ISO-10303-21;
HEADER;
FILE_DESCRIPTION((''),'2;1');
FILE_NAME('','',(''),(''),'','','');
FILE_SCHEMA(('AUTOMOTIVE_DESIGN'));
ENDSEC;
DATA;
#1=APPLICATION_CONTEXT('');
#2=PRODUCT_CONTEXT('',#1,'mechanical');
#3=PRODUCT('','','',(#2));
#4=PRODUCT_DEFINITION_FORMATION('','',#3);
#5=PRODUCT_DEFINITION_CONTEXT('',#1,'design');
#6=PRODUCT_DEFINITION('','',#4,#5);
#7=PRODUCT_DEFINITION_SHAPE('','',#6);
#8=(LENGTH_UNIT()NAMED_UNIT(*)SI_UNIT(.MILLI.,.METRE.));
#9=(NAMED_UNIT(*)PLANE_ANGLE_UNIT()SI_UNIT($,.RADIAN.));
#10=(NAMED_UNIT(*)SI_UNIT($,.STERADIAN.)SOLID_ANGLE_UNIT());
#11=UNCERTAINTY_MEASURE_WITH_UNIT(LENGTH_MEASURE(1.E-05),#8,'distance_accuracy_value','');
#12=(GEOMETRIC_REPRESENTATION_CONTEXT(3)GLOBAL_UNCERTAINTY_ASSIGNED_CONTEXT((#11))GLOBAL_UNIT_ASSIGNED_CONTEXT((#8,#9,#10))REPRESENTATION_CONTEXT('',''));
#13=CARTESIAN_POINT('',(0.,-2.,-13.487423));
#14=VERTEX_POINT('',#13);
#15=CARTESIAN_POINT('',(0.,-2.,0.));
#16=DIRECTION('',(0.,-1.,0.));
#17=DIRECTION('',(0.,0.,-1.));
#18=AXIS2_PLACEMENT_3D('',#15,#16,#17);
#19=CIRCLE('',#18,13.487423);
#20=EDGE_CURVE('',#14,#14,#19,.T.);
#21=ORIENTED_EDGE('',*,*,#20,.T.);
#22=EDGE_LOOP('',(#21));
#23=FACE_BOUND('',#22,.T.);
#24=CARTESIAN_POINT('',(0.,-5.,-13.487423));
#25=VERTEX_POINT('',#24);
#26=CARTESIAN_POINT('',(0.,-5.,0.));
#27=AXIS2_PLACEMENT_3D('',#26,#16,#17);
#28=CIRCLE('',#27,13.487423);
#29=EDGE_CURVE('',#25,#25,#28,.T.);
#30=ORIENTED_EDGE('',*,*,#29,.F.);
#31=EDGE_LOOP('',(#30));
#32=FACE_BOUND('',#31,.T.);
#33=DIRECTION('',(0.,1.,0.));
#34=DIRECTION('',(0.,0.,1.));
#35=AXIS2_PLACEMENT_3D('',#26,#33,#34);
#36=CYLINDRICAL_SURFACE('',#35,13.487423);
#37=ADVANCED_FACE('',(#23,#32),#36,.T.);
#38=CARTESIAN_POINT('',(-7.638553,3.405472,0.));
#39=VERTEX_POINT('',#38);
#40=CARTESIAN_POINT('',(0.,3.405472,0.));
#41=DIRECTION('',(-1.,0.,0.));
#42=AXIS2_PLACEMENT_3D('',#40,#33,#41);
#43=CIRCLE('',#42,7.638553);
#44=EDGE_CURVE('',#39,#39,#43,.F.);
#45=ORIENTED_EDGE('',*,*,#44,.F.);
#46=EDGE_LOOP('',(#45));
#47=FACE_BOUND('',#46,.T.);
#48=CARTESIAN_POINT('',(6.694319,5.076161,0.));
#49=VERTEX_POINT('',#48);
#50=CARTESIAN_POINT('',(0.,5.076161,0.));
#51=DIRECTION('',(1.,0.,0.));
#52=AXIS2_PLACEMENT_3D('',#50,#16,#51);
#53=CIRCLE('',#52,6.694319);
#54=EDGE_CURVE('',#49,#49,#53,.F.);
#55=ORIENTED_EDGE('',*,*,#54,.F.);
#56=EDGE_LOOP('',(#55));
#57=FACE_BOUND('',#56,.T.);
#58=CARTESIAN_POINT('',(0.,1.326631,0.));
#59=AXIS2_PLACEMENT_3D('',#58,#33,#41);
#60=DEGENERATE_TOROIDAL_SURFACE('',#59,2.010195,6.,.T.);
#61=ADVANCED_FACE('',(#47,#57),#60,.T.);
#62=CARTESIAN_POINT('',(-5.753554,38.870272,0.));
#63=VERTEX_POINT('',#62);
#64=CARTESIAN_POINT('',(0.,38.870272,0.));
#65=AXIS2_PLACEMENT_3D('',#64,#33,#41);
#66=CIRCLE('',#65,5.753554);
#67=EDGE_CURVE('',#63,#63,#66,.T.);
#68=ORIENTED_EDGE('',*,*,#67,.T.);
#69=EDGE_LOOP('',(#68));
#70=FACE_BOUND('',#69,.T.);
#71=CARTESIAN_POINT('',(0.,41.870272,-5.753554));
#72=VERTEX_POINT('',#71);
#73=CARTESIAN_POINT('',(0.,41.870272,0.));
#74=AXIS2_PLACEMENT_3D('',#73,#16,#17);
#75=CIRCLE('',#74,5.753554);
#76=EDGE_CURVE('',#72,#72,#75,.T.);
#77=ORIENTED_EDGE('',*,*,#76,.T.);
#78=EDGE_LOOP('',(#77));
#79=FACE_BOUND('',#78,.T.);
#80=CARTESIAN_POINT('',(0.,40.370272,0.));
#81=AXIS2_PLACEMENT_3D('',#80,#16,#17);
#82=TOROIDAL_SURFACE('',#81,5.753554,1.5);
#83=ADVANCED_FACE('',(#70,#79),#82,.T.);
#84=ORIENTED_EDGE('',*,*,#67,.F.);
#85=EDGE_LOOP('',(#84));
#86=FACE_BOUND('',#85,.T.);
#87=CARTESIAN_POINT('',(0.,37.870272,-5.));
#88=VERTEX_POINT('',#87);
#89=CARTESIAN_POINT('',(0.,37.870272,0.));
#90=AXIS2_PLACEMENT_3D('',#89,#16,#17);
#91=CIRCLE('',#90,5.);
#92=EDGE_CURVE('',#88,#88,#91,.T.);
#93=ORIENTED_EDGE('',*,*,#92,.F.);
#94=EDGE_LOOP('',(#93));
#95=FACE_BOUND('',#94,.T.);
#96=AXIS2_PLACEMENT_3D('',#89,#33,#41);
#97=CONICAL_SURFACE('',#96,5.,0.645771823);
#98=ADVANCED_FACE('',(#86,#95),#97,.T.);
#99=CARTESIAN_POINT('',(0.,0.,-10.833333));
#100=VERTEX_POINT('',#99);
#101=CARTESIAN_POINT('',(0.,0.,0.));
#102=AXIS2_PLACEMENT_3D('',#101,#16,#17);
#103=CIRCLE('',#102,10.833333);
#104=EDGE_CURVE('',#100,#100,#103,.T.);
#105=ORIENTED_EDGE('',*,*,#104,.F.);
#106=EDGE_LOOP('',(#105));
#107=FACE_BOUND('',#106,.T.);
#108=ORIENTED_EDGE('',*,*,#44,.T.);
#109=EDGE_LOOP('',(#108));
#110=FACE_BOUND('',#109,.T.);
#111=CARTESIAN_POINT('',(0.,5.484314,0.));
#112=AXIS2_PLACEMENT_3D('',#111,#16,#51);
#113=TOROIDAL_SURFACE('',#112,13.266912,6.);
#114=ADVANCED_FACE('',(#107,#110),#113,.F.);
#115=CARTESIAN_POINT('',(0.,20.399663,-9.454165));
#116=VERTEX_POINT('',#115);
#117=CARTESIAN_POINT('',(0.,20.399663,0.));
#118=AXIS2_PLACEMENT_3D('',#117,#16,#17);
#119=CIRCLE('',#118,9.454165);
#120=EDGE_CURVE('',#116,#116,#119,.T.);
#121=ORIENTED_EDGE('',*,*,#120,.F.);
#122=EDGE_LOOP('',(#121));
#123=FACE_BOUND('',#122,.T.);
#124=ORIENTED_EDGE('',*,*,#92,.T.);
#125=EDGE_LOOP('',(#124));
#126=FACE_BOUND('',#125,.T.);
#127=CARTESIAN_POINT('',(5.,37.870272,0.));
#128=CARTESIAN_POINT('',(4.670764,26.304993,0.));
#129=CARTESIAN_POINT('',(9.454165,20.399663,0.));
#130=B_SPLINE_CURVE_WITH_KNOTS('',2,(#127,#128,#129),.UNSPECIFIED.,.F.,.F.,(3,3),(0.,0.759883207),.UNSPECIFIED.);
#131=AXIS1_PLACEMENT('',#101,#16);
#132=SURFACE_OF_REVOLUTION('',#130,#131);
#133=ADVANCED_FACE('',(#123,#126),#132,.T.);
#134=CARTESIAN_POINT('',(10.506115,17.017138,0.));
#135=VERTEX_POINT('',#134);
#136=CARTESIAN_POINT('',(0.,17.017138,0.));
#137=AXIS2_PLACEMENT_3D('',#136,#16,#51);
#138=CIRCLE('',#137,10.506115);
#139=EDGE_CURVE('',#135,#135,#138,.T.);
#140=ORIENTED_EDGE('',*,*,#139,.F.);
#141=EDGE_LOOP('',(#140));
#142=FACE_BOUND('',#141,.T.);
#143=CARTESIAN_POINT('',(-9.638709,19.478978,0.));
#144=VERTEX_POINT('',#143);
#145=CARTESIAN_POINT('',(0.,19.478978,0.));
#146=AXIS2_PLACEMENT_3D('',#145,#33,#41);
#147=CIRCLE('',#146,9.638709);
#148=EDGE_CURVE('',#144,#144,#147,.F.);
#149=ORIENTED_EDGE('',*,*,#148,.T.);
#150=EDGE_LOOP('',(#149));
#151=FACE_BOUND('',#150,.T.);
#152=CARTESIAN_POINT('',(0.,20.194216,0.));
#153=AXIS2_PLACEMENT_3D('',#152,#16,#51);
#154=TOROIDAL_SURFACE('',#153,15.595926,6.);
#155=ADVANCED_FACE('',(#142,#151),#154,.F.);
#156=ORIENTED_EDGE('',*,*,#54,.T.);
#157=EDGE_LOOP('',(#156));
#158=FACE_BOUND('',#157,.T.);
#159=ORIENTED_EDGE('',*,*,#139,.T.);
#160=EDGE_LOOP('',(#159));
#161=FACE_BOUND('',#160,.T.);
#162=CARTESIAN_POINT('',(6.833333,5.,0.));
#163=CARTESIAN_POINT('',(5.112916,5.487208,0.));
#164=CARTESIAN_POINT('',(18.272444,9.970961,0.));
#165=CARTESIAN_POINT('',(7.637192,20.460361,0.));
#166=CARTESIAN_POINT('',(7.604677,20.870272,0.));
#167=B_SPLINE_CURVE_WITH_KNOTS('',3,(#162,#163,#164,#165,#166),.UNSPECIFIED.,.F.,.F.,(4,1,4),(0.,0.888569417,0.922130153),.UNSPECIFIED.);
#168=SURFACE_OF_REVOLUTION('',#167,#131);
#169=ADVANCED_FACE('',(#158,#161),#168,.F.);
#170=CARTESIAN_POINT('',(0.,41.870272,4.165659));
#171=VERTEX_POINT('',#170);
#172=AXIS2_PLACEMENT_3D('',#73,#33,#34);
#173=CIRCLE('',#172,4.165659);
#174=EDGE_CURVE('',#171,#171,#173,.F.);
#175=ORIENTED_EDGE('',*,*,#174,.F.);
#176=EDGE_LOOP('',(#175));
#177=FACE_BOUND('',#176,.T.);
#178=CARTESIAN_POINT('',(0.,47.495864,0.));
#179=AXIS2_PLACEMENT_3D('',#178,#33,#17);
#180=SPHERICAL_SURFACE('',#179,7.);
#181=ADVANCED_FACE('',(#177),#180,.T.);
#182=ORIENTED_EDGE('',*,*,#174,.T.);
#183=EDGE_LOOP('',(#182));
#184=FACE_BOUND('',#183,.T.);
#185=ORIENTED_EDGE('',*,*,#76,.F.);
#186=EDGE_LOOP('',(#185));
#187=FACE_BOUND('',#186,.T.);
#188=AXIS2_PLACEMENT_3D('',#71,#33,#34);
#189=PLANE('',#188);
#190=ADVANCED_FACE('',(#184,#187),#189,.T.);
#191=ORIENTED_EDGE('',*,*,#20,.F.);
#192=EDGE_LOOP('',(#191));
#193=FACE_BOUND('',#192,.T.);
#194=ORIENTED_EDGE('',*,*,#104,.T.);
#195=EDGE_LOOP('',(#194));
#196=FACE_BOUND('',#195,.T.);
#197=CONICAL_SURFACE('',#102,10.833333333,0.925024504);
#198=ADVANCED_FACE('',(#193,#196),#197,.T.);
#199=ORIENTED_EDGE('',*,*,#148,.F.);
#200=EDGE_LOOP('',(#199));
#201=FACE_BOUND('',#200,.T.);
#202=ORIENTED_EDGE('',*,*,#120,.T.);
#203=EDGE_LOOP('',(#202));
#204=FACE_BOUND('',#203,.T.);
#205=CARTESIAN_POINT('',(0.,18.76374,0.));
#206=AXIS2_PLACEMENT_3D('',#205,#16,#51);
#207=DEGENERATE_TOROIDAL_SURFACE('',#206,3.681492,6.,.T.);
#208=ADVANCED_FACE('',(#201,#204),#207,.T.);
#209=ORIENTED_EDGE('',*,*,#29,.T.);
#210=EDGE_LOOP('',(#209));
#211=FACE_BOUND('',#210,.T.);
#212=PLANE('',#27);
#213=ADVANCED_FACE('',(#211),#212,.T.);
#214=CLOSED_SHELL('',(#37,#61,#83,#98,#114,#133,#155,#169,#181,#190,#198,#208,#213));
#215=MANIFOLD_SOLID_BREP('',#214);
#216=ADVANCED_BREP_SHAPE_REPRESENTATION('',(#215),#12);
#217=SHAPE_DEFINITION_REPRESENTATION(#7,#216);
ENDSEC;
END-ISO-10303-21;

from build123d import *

# Parameters (mm, degrees)
SKETCH1_R           = 7.833333333
BOSS_EXTRUDE1_DEPTH = 5
FILLET3_R           = 5
SKETCH6_R           = 9.604677311
SKETCH5_R           = 5
SKETCH8_R           = 5
BOSS_EXTRUDE2_DEPTH = 10
SKETCH9_R           = 5
BOSS_EXTRUDE3_DEPTH = 1
BOSS_EXTRUDE3_DRAFT = -37
SKETCH13_R          = 10.833333333
BOSS_EXTRUDE4_DEPTH = 2
BOSS_EXTRUDE4_DRAFT = -53
FILLET7_R           = 6
FILLET8_R           = 6
FILLET9_R           = 6
SKETCH15_R          = 13.487422977
BOSS_EXTRUDE5_DEPTH = 3


with BuildPart() as part:
    # Sketch1 → Boss-Extrude1 (new body)
    with BuildSketch(Plane(origin=(0, 0, 0), x_dir=(1, 0, 0), z_dir=(0, 1, 0))):
        with Locations(Location((0, 0, 0), (0, 0, 270))):
            Circle(SKETCH1_R)
    extrude(amount=BOSS_EXTRUDE1_DEPTH)

    # Sketch2 → Revolve1 (revolve)
    with BuildSketch(Plane.XY):
        with BuildLine():
            Line((0, 5), (6.833333333, 5))
            add(Edge.make_bspline(
                [(6.833333333, 5), (5.112915615, 5.487208421), (18.272444449, 9.970961169), (7.637192214, 20.460360909), (7.604677311, 20.870272218)],
                knots=[0, 0, 0, 0, 0.888569417, 0.922130153, 0.922130153, 0.922130153, 0.922130153], degree=3))
            Line((7.604677311, 20.870272218), (0, 20.870272218))
            Line((0, 20.870272218), (0, 5))
        make_face()
    revolve(axis=Axis((0, 0, 0), (0, 1, 0)))

    # Fillet3
    # the kernel refuses this fillet: 5 mm, written as the material it takes off along each edge
    with BuildSketch(Plane(origin=(0, 5, 0), x_dir=(0, 0, 1), z_dir=(-1, 0, 0))) as fillet3_piece_1:
        with BuildLine():
            CenterArc((2.833333333, -3), FILLET3_R, 0, 36.869897646)
            Line((6.833333333, 0), (7.833333333, 0))
            Line((7.833333333, 0), (7.833333333, -3))
        make_face()
    revolve(axis=Axis((0, 5, 0), (0, 1, 0)), mode=Mode.SUBTRACT)

    # Sketch6 → Loft1 section 0
    with BuildSketch(Plane(origin=(0, 19.870272218, 0), x_dir=(1, 0, 0), z_dir=(0, 1, 0))):
        Circle(SKETCH6_R)
    # Sketch5 → Loft1 section 1
    with BuildSketch(Plane(origin=(0, 27.870272218, 0), x_dir=(1, 0, 0), z_dir=(0, 1, 0))):
        Circle(SKETCH5_R)
    loft()

    # Sketch8 → Boss-Extrude2 (add)
    with BuildSketch(Plane(origin=(0, 27.870272218, 0), x_dir=(1, 0, 0), z_dir=(0, 1, 0))):
        with Locations(Location((0, 0, 0), (0, 0, 180))):
            Circle(SKETCH8_R)
    extrude(amount=BOSS_EXTRUDE2_DEPTH)


with BuildPart() as boss_extrude3_tool:
    # Sketch9 → Boss-Extrude3 (with draft: the straight prism first)
    with BuildSketch(Plane(origin=(0, 37.870272218, 0), x_dir=(1, 0, 0), z_dir=(0, 1, 0))):
        with Locations(Location((0, 0, 0), (0, 0, 180))):
            Circle(SKETCH9_R)
    extrude(amount=BOSS_EXTRUDE3_DEPTH)
    # Boss-Extrude3: the draft: its side faces are tilted about the plane it starts from
    boss_extrude3_sides = [boss_extrude3_tool.faces().sort_by_distance(p)[0] for p in [
        (5, 38.370272218, 0),
    ]]
    draft(boss_extrude3_sides, Plane(origin=(0, 37.870272218, 0), x_dir=(1, 0, 0), z_dir=(0, 1, 0)), BOSS_EXTRUDE3_DRAFT)


with BuildPart() as part_1:
    add(part.part)

    # Boss-Extrude3: add boss_extrude3_tool
    add(boss_extrude3_tool.part)

    # Sketch10 → Revolve2 (revolve)
    with BuildSketch(Plane(origin=(0, 0, 0), x_dir=(0, 0, -1), z_dir=(1, 0, 0)), mode=Mode.PRIVATE) as revolve2_sk:
        with BuildLine():
            Line((0, 19.870272218), (9.604677326, 19.870272218))
            add(Edge.make_bspline(
                [(5, 37.870272218), (7.121771017, 28.575040847), (9.604677326, 19.870272218)],
                knots=[0, 0, 0, 0.621695863, 0.621695863, 0.621695863], degree=2))
            Line((5, 37.870272218), (0, 37.870272218))
            Line((0, 37.870272218), (0, 19.870272218))
        make_face()
    revolve(revolve2_sk.sketch.rotate(Axis((0, 37.870272218, 0), (0, -1, 0)), 270), axis=Axis((0, 37.870272218, 0), (0, -1, 0)))

    # Sketch11 → Revolve3 (revolve)
    with BuildSketch(Plane(origin=(0, 0, 0), x_dir=(0, 0, -1), z_dir=(1, 0, 0)), mode=Mode.PRIVATE) as revolve3_sk:
        with BuildLine():
            Line((5.75355405, 41.870272218), (0, 41.870272218))
            Line((0, 41.870272218), (0, 38.870272218))
            Line((0, 38.870272218), (5.75355405, 38.870272218))
            ThreePointArc((5.75355405, 38.870272218), (7.25355405, 40.370272218), (5.75355405, 41.870272218))
        make_face()
    revolve(revolve3_sk.sketch.rotate(Axis((0, 37.870272218, 0), (0, 1, 0)), 90), axis=Axis((0, 37.870272218, 0), (0, 1, 0)))

    # Sketch12 → Revolve4 (revolve)
    with BuildSketch(Plane(origin=(0, 0, 0), x_dir=(0, 0, -1), z_dir=(1, 0, 0))):
        with BuildLine():
            Line((0, 54.495864193), (0, 40.495864193))
            ThreePointArc((0, 40.495864193), (7, 47.495864193), (0, 54.495864193))
        make_face()
    revolve(axis=Axis((0, 54.495864193, 0), (0, -1, 0)))

    # Fillet6: read off the stored shape, not the designer's step
    # Fillet6 outline → Fillet6 (revolve)
    with BuildSketch(Plane.XY):
        with BuildLine():
            Line((9.604677326, 17.017137752), (10.506115086, 17.017137752))
            ThreePointArc((10.506115086, 17.017137752), (9.874687981, 18.38661086), (9.604677326, 19.870272219))
            Line((9.604677326, 19.870272219), (9.604677326, 17.017137752))
        make_face()
    revolve(axis=Axis((0, 0, 0), (0, 1, 0)))

    # Fillet6 2 outline → Fillet6 2 (revolve)
    with BuildSketch(Plane.XY):
        with BuildLine():
            add(Edge.make_bspline(
                [(9.604677326, 18.295115575), (9.246204709, 18.75185684), (8.793039383, 19.275136302), (8.274566582, 19.814898943), (8.22215024, 19.870272218)],
                knots=[0.845194733, 0.845194733, 0.845194733, 0.845194733, 0.888569417, 0.893504264, 0.893504264, 0.893504264, 0.893504264], degree=3))
            Line((9.604677326, 18.295115575), (9.604677326, 19.870272219))
            Line((9.604677326, 19.870272219), (8.22215024, 19.870272218))
        make_face()
    revolve(axis=Axis((0, 0, 0), (0, 1, 0)))


with BuildPart() as boss_extrude4_tool:
    # Sketch13 → Boss-Extrude4 (with draft: the straight prism first)
    with BuildSketch(Plane.XZ):
        Circle(SKETCH13_R)
    extrude(amount=BOSS_EXTRUDE4_DEPTH)
    # Boss-Extrude4: the draft: its side faces are tilted about the plane it starts from
    boss_extrude4_sides = [boss_extrude4_tool.faces().sort_by_distance(p)[0] for p in [
        (-10.833333333, -1, 0),
    ]]
    draft(boss_extrude4_sides, Plane.XZ, BOSS_EXTRUDE4_DRAFT)


with BuildPart() as part_2:
    add(part_1.part)

    # Boss-Extrude4: add boss_extrude4_tool
    add(boss_extrude4_tool.part)

    # Fillet7
    # the kernel refuses this fillet: 6 mm, written as the material it adds along each edge
    with BuildSketch(Plane(origin=(0, 0, 0), x_dir=(0, 0, 1), z_dir=(-1, 0, 0))) as fillet7_piece_1:
        with BuildLine():
            CenterArc((13.266911744, 5.484313642), FILLET7_R, 198.466841555, 47.604652304)
            Line((7.575868974, 3.583778928), (7.006764698, 3.393725457))
            ThreePointArc((7.006764698, 3.393725457), (7.233333333, 2), (7.233333333, 0))
            Line((7.233333333, 0), (7.833333333, -0.6))
            ThreePointArc((7.833333333, -0.6), (9.333333333, -0.6), (10.589975492, -0.548431364))
            Line((10.589975492, -0.548431364), (10.833333333, 0))
        make_face()
    revolve(axis=Axis((0, 0, 0), (0, 1, 0)))

    # Fillet8
    fillet8_edges = [part_2.edges().sort_by_distance(p)[0] for p in [
        (0, 19.870272218, -9.604677311),
    ]]
    fillet(fillet8_edges, radius=FILLET8_R)

    # Sketch14 → Cut-Revolve1 (revolve, cut)
    with BuildSketch(Plane.XY):
        with BuildLine():
            add(Edge.make_bspline(
                [(9.454164987, 20.399663383), (7.057318368, 28.857400383), (5, 37.870272218)],
                knots=[0.018885141, 0.018885141, 0.018885141, 0.621695863, 0.621695863, 0.621695863], degree=2))
            add(Edge.make_bspline(
                [(5, 37.870272218), (4.670764313, 26.304992773), (9.454164987, 20.399663383)],
                knots=[0, 0, 0, 0.759883207, 0.759883207, 0.759883207], degree=2))
        make_face()
    revolve(axis=Axis((0, 0, 0), (0, 1, 0)), mode=Mode.SUBTRACT)

    # Fillet9
    fillet9_edges = [part_2.edges().sort_by_distance(p)[0] for p in [
        (-4.831896338, 5, -4.831896338),
    ]]
    fillet(fillet9_edges, radius=FILLET9_R)

    # Sketch15 → Boss-Extrude5 (add)
    with BuildSketch(Plane.XZ.offset(2)):
        with Locations(Location((0, 0, 0), (0, 0, 270))):
            Circle(SKETCH15_R)
    extrude(amount=BOSS_EXTRUDE5_DEPTH)


solid = part_2.part
